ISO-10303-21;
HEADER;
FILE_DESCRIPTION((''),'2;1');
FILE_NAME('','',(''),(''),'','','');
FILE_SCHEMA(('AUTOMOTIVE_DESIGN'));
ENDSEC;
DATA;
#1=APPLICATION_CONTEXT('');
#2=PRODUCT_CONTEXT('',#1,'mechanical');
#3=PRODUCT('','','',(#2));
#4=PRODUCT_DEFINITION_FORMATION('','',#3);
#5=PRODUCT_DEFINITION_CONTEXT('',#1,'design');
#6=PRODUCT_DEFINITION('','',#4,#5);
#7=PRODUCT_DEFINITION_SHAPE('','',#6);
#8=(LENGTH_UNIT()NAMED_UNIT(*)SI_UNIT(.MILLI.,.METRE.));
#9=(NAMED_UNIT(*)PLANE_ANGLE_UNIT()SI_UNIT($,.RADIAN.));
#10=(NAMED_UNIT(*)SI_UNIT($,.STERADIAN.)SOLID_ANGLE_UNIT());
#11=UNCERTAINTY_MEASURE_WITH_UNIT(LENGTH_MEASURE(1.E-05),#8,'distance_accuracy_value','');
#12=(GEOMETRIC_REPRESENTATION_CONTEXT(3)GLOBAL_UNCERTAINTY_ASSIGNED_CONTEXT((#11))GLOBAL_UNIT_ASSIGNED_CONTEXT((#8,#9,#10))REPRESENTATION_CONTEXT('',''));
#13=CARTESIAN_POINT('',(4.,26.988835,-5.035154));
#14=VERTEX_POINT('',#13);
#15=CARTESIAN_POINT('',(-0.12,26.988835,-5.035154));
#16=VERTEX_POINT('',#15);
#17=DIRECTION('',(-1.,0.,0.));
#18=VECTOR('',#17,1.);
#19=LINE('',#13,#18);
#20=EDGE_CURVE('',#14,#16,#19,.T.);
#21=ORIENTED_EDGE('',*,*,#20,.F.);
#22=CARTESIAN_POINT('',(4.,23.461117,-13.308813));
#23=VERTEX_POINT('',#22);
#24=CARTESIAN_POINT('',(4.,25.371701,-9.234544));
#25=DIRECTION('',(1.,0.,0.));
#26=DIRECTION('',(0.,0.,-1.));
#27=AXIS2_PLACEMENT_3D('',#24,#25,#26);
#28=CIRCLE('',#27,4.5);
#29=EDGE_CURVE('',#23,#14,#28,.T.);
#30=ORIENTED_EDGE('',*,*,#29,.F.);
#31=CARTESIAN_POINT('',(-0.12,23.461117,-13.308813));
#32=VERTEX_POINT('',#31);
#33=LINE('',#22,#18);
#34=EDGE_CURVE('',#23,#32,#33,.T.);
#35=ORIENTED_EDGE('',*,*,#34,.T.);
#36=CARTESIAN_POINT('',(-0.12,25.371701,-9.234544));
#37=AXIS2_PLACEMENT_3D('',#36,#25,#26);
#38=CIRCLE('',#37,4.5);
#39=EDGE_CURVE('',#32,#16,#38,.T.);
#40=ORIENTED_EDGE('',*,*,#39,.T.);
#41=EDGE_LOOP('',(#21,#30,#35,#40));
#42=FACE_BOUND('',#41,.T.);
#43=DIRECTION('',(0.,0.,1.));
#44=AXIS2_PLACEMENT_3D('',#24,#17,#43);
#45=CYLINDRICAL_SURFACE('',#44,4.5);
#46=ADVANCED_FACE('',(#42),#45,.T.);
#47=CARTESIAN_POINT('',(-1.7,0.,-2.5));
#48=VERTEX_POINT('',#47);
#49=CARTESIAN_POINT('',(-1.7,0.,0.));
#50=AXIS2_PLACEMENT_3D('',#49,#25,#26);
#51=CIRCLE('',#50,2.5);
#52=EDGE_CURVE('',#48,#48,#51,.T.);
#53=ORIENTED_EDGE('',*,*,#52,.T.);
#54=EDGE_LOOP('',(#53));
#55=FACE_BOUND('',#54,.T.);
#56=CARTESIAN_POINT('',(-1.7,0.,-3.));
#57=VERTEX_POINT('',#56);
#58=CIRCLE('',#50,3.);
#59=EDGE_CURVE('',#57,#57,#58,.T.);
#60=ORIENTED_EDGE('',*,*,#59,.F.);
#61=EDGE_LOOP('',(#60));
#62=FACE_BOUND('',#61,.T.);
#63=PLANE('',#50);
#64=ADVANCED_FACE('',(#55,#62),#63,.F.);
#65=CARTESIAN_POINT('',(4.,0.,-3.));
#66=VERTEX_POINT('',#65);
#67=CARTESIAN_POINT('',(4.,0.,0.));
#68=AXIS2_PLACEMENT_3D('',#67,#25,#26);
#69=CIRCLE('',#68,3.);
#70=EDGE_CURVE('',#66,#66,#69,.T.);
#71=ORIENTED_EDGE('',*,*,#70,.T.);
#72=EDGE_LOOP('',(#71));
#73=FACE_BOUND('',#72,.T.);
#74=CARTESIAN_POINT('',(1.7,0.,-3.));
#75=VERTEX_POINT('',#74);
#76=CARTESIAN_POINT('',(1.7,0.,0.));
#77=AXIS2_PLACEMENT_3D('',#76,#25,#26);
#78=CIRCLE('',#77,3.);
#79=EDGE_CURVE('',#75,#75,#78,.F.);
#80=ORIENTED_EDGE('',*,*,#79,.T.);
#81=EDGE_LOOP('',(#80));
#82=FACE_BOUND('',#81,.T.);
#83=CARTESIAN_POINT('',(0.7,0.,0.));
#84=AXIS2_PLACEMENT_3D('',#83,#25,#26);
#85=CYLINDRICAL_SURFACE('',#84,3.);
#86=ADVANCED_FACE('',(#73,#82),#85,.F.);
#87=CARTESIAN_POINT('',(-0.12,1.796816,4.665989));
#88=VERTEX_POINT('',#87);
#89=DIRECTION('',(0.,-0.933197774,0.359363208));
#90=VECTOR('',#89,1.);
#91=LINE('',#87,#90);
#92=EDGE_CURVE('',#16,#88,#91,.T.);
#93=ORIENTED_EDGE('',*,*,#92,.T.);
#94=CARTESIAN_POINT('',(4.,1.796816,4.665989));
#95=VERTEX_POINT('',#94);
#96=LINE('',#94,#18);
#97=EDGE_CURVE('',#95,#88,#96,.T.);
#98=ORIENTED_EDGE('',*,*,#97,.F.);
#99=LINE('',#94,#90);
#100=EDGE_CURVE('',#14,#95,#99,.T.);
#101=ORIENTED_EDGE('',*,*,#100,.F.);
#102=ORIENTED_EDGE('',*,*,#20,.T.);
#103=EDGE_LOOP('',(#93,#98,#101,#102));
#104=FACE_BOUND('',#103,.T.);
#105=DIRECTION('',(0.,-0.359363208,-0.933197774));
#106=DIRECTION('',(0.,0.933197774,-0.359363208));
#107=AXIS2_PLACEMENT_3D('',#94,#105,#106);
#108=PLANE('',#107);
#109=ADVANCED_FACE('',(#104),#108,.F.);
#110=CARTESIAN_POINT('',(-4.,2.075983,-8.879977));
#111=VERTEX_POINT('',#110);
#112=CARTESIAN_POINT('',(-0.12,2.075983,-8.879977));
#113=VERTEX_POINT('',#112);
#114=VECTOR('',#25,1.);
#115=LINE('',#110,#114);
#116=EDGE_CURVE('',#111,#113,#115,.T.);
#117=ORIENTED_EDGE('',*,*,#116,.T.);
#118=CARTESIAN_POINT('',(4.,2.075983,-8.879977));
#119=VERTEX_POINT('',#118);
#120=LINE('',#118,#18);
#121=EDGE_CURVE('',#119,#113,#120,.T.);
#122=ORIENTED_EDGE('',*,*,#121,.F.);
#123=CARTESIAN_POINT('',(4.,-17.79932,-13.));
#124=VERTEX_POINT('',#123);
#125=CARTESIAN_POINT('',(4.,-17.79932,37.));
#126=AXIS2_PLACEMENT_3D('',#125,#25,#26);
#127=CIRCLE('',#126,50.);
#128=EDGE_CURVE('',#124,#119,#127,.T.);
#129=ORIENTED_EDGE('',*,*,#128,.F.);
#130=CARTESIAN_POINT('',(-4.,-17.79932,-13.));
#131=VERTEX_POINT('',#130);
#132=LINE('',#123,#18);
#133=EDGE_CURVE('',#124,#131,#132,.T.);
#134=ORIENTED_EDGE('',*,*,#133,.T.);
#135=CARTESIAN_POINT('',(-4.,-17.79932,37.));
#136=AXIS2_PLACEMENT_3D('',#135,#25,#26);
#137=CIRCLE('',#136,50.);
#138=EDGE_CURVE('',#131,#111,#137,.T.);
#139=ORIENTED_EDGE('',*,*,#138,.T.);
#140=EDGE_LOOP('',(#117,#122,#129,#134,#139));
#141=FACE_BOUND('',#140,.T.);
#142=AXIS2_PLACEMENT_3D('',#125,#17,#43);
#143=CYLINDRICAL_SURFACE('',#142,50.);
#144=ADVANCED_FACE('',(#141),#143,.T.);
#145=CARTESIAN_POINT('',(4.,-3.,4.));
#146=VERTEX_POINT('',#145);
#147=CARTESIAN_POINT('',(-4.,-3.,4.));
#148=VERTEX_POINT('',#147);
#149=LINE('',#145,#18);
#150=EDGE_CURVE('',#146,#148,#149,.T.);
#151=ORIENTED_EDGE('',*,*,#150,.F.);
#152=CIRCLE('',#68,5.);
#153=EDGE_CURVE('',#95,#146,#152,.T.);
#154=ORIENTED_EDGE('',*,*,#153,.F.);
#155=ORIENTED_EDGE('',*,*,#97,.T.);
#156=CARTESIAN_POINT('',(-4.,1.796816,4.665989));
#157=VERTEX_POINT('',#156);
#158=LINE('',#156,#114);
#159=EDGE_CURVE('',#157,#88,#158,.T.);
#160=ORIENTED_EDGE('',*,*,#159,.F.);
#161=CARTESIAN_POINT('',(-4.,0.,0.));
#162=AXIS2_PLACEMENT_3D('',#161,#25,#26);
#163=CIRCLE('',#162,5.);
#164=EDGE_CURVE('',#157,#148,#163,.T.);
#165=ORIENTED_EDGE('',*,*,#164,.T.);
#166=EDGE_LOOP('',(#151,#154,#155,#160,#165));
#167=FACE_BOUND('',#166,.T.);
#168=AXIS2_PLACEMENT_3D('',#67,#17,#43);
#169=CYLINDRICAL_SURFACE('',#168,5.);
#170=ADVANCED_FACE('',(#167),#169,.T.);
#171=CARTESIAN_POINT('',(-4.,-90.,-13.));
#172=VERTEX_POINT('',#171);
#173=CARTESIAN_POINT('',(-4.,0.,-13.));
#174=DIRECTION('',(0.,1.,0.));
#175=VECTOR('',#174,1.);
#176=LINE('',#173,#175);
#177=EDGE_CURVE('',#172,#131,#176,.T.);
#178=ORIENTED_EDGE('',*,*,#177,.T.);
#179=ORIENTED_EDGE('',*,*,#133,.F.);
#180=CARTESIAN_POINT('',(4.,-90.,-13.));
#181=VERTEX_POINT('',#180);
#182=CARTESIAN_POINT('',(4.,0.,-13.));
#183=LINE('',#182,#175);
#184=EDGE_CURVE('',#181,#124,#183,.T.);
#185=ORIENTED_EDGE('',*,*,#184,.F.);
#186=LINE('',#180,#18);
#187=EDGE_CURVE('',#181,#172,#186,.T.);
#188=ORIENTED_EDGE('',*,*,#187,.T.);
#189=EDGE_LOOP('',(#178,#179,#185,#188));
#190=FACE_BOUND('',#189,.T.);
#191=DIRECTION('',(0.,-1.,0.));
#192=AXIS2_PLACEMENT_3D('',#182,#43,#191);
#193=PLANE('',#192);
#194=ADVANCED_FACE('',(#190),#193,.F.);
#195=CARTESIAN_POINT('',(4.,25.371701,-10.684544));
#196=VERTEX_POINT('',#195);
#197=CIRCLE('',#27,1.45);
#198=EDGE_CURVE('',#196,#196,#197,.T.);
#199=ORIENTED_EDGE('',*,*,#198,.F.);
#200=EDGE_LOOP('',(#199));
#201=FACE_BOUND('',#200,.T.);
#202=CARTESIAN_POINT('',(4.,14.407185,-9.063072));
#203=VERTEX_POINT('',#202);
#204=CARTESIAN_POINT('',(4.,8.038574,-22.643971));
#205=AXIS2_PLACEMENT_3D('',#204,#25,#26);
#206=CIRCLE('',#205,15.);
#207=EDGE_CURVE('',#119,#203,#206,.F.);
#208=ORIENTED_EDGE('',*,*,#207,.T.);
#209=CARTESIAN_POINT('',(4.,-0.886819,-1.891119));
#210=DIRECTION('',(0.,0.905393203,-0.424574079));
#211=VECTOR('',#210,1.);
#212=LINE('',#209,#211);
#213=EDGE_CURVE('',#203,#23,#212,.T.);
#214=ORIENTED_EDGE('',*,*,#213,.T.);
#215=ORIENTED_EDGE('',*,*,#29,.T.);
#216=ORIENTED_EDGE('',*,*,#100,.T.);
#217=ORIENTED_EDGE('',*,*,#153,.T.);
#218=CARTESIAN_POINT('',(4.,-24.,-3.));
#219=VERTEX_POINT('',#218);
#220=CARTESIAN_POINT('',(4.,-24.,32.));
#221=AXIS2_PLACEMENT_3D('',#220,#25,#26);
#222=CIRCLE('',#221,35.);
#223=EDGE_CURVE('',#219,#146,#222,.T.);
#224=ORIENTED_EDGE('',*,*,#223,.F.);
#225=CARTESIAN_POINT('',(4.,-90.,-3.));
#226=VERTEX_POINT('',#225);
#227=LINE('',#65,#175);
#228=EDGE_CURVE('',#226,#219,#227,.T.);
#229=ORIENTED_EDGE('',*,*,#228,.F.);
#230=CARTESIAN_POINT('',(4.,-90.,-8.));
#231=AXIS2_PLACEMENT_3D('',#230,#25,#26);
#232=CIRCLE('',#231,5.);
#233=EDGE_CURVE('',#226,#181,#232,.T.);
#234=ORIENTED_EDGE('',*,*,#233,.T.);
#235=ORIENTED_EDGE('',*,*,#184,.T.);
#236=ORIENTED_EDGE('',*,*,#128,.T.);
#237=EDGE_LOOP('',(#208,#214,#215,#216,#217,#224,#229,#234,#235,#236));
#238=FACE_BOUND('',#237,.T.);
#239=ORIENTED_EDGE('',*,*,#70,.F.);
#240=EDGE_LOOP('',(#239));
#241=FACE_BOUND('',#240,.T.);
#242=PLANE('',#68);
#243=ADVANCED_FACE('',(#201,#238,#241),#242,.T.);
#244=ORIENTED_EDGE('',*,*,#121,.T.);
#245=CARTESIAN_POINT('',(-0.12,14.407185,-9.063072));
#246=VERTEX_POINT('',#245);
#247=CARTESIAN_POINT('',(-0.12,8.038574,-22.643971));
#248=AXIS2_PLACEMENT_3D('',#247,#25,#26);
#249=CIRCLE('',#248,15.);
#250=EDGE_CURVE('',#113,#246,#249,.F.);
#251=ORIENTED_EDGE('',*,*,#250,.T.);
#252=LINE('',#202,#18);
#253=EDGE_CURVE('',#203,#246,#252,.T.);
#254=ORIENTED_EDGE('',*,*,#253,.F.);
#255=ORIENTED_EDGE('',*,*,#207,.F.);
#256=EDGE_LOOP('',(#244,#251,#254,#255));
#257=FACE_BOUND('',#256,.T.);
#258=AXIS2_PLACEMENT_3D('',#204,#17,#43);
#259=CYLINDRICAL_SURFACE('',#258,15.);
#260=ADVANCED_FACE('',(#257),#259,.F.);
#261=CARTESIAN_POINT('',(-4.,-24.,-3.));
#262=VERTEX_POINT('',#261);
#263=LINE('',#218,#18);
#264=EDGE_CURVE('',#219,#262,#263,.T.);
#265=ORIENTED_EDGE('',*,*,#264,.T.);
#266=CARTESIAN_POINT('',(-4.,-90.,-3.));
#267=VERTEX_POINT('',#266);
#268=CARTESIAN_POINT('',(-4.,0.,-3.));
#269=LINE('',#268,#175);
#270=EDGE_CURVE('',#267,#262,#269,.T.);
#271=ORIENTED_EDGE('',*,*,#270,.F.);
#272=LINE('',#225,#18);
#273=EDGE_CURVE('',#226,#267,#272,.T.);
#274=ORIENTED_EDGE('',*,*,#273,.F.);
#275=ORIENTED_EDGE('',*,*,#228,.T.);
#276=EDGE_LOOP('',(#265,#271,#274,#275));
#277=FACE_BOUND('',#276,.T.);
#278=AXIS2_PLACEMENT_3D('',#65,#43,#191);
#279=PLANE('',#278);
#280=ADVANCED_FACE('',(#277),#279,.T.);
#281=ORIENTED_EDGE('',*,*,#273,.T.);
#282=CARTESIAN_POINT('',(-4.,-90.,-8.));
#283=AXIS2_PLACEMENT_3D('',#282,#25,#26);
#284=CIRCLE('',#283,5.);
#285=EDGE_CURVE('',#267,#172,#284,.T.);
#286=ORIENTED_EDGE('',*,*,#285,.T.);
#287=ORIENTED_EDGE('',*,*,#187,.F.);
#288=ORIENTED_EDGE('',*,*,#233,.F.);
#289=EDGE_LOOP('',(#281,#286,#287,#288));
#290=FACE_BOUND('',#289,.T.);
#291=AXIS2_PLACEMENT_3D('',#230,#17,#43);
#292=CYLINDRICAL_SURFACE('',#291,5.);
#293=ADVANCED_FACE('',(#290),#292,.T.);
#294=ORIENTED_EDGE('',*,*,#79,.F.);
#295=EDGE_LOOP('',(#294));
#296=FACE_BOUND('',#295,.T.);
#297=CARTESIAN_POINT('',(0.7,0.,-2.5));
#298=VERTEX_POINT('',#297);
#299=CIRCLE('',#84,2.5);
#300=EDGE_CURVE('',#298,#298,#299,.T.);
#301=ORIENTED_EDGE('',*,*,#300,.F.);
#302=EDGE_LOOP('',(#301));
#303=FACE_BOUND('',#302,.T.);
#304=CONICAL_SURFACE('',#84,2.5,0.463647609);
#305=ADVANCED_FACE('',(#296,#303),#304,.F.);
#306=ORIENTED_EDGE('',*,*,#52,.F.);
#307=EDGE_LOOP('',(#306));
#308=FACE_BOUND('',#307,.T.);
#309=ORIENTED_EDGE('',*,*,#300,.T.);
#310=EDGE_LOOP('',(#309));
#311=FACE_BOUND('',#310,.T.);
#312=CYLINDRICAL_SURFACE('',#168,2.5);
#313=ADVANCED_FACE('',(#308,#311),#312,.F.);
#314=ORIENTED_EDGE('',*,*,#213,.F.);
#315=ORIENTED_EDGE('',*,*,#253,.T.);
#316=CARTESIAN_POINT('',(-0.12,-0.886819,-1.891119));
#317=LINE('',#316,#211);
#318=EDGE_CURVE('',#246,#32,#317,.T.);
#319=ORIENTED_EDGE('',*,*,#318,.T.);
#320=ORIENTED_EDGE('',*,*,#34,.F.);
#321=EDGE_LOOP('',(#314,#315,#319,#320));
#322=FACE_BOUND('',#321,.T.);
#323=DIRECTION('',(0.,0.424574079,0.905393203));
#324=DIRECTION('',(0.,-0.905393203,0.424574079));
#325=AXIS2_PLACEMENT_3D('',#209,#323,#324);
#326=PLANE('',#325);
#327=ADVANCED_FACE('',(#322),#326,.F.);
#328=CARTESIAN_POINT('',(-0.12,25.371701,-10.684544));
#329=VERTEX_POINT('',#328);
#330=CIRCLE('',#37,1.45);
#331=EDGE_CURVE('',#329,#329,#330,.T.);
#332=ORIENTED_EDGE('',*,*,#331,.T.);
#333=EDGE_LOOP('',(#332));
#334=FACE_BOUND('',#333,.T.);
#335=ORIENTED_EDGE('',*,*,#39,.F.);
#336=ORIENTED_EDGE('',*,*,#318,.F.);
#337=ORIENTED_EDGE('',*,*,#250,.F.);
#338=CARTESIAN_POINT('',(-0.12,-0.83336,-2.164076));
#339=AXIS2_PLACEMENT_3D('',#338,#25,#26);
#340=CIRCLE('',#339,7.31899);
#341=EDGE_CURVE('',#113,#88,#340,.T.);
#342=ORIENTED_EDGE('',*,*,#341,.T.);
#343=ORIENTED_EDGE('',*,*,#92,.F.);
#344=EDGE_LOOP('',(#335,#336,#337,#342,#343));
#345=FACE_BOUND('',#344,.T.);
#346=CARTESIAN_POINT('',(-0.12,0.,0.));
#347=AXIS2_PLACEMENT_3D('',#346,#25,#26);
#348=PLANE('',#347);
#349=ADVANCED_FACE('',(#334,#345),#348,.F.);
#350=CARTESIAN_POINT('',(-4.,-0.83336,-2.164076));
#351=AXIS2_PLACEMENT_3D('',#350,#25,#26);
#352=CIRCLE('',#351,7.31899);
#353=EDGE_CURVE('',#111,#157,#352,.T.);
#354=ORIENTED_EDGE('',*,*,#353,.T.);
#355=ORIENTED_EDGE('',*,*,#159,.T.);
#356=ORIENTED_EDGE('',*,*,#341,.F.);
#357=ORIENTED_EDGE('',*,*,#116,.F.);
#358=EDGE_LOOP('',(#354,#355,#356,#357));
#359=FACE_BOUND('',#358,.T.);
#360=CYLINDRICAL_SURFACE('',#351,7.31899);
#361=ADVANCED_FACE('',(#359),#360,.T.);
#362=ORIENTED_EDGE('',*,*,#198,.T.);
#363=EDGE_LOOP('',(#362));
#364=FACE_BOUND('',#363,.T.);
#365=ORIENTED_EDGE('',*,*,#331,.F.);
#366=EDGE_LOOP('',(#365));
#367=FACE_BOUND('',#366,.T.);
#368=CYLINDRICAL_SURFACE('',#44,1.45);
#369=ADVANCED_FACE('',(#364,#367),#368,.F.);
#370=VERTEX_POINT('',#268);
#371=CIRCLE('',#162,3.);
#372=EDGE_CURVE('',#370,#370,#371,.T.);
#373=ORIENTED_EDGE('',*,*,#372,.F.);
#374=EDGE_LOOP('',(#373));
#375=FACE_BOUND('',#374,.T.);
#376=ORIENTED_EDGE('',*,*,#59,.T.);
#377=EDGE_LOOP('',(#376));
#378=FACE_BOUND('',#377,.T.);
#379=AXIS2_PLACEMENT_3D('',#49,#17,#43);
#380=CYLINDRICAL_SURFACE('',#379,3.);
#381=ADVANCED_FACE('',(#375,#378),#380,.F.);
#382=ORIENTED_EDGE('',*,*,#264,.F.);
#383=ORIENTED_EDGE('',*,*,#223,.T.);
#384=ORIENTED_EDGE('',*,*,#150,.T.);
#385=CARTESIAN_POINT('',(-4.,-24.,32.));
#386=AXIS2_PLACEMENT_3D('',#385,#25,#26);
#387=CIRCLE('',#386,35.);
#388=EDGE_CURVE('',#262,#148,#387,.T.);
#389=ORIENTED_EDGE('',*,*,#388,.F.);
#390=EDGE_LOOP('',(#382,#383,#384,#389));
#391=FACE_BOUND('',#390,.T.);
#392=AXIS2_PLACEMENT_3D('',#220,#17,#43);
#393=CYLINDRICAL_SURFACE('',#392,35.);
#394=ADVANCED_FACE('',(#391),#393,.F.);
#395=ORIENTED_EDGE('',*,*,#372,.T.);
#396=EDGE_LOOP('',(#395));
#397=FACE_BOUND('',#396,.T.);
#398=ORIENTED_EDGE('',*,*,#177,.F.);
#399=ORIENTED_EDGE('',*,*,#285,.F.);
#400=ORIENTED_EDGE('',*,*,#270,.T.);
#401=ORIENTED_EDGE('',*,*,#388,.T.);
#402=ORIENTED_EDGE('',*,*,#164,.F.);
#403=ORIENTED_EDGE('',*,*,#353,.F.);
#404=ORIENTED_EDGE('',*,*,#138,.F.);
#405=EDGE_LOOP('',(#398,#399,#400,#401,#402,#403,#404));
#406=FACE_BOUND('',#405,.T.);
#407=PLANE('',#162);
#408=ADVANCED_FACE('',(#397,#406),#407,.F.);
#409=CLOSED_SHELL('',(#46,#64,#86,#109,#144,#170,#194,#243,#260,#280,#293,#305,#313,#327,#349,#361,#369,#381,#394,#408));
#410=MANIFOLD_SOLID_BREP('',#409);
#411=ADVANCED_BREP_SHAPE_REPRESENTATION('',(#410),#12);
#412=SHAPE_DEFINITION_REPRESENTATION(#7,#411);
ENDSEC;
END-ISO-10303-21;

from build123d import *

# Parameters (mm, degrees)
SKETCH1_R           = 2.5
SKETCH1_R_2         = 1.45
BOSS_EXTRUDE1_DEPTH = 4
SKETCH2_R           = 3
CUT_EXTRUDE1_DEPTH  = 3.3
CUT_EXTRUDE2_START  = -0.12
SKETCH1_5_R         = 4.5
SKETCH1_5_R_2       = 1.45
CUT_EXTRUDE2_DEPTH  = 96.951003405
CUT_EXTRUDE3_START  = -5.7
SKETCH2_2_R         = 3
CUT_EXTRUDE3_DEPTH  = 2.3
CHAMFER1_SIZE2      = 0.5
CHAMFER1_SIZE       = 1


with BuildPart() as part:
    # Sketch1 → Boss-Extrude1 (new, symmetric)
    with BuildSketch(Plane(origin=(0, 0, 0), x_dir=(0, 0, -1), z_dir=(1, 0, 0))):
        with BuildLine():
            Line((3, -24), (3, -90))
            ThreePointArc((3, -90), (8, -95), (13, -90))
            Line((13, -90), (13, -17.799320055))
            ThreePointArc((13, -17.799320055), (11.959160872, -7.650400571), (8.879977332, 2.075983213))
            ThreePointArc((8.879977332, 2.075983213), (7.645623758, 8.261271435), (9.063072492, 14.407185379))
            Line((9.063072492, 14.407185379), (13.308813282, 23.461117406))
            ThreePointArc((13.308813282, 23.461117406), (10.999511856, 29.511131641), (5.035153889, 26.988835198))
            Line((5.035153889, 26.988835198), (-4.665988868, 1.79681604))
            ThreePointArc((-4.665988868, 1.79681604), (-4.952494502, -0.687603231), (-4, -3))
            ThreePointArc((-4, -3), (1.203915432, -12.932028189), (3, -24))
        make_face()
        Circle(SKETCH1_R, mode=Mode.SUBTRACT)
        with Locations((9.23454387, 25.371700761)):
            Circle(SKETCH1_R_2, mode=Mode.SUBTRACT)
    extrude(amount=BOSS_EXTRUDE1_DEPTH, both=True)

    # Sketch2 → Cut-Extrude1 (cut)
    with BuildSketch(Plane(origin=(4, 0, 0), x_dir=(0, 0, -1), z_dir=(1, 0, 0))):
        Circle(SKETCH2_R)
    extrude(amount=-CUT_EXTRUDE1_DEPTH, mode=Mode.SUBTRACT)

    # Sketch1<5> → Cut-Extrude2 (cut, through all)
    # profile 1 of 2: a face of its own
    with BuildSketch(Plane(origin=(0, 0, 0), x_dir=(0, 0, -1), z_dir=(1, 0, 0)).offset(CUT_EXTRUDE2_START)):
        with BuildLine():
            ThreePointArc((-4.665988868, 1.79681604), (2.013271717, 6.484076223), (8.879977332, 2.075983213))
            ThreePointArc((8.879977332, 2.075983213), (7.645623758, 8.261271435), (9.063072492, 14.407185379))
            Line((9.063072492, 14.407185379), (13.308813282, 23.461117406))
            ThreePointArc((13.308813282, 23.461117406), (7.469575883, 21.232269882), (5.035153889, 26.988835198))
            Line((5.035153889, 26.988835198), (-4.665988868, 1.79681604))
        make_face()
    # profile 2 of 2: a face of its own
    with BuildSketch(Plane(origin=(0, 0, 0), x_dir=(0, 0, -1), z_dir=(1, 0, 0)).offset(CUT_EXTRUDE2_START)):
        with Locations((9.23454387, 25.371700761)):
            Circle(SKETCH1_5_R)
        with Locations((9.23454387, 25.371700761)):
            Circle(SKETCH1_5_R_2, mode=Mode.SUBTRACT)
    extrude(amount=-CUT_EXTRUDE2_DEPTH, mode=Mode.SUBTRACT)

    # Sketch2<2> → Cut-Extrude3 (cut)
    with BuildSketch(Plane(origin=(4, 0, 0), x_dir=(0, 0, -1), z_dir=(1, 0, 0)).offset(CUT_EXTRUDE3_START)):
        Circle(SKETCH2_2_R)
    extrude(amount=-CUT_EXTRUDE3_DEPTH, mode=Mode.SUBTRACT)

    # Chamfer1
    chamfer1_edges = [part.edges().sort_by_distance(p)[0] for p in [
        (0.7, 0, 3),
    ]]
    chamfer1_side = [part.faces().sort_by_distance(p)[0] for p in [
        (0.71, 0, 3),
    ]]
    chamfer(chamfer1_edges, length=CHAMFER1_SIZE - 0.0001, length2=CHAMFER1_SIZE2 - 0.0001, reference=chamfer1_side[0])  # a hair under: the kernel refuses the full size


solid = part.part
